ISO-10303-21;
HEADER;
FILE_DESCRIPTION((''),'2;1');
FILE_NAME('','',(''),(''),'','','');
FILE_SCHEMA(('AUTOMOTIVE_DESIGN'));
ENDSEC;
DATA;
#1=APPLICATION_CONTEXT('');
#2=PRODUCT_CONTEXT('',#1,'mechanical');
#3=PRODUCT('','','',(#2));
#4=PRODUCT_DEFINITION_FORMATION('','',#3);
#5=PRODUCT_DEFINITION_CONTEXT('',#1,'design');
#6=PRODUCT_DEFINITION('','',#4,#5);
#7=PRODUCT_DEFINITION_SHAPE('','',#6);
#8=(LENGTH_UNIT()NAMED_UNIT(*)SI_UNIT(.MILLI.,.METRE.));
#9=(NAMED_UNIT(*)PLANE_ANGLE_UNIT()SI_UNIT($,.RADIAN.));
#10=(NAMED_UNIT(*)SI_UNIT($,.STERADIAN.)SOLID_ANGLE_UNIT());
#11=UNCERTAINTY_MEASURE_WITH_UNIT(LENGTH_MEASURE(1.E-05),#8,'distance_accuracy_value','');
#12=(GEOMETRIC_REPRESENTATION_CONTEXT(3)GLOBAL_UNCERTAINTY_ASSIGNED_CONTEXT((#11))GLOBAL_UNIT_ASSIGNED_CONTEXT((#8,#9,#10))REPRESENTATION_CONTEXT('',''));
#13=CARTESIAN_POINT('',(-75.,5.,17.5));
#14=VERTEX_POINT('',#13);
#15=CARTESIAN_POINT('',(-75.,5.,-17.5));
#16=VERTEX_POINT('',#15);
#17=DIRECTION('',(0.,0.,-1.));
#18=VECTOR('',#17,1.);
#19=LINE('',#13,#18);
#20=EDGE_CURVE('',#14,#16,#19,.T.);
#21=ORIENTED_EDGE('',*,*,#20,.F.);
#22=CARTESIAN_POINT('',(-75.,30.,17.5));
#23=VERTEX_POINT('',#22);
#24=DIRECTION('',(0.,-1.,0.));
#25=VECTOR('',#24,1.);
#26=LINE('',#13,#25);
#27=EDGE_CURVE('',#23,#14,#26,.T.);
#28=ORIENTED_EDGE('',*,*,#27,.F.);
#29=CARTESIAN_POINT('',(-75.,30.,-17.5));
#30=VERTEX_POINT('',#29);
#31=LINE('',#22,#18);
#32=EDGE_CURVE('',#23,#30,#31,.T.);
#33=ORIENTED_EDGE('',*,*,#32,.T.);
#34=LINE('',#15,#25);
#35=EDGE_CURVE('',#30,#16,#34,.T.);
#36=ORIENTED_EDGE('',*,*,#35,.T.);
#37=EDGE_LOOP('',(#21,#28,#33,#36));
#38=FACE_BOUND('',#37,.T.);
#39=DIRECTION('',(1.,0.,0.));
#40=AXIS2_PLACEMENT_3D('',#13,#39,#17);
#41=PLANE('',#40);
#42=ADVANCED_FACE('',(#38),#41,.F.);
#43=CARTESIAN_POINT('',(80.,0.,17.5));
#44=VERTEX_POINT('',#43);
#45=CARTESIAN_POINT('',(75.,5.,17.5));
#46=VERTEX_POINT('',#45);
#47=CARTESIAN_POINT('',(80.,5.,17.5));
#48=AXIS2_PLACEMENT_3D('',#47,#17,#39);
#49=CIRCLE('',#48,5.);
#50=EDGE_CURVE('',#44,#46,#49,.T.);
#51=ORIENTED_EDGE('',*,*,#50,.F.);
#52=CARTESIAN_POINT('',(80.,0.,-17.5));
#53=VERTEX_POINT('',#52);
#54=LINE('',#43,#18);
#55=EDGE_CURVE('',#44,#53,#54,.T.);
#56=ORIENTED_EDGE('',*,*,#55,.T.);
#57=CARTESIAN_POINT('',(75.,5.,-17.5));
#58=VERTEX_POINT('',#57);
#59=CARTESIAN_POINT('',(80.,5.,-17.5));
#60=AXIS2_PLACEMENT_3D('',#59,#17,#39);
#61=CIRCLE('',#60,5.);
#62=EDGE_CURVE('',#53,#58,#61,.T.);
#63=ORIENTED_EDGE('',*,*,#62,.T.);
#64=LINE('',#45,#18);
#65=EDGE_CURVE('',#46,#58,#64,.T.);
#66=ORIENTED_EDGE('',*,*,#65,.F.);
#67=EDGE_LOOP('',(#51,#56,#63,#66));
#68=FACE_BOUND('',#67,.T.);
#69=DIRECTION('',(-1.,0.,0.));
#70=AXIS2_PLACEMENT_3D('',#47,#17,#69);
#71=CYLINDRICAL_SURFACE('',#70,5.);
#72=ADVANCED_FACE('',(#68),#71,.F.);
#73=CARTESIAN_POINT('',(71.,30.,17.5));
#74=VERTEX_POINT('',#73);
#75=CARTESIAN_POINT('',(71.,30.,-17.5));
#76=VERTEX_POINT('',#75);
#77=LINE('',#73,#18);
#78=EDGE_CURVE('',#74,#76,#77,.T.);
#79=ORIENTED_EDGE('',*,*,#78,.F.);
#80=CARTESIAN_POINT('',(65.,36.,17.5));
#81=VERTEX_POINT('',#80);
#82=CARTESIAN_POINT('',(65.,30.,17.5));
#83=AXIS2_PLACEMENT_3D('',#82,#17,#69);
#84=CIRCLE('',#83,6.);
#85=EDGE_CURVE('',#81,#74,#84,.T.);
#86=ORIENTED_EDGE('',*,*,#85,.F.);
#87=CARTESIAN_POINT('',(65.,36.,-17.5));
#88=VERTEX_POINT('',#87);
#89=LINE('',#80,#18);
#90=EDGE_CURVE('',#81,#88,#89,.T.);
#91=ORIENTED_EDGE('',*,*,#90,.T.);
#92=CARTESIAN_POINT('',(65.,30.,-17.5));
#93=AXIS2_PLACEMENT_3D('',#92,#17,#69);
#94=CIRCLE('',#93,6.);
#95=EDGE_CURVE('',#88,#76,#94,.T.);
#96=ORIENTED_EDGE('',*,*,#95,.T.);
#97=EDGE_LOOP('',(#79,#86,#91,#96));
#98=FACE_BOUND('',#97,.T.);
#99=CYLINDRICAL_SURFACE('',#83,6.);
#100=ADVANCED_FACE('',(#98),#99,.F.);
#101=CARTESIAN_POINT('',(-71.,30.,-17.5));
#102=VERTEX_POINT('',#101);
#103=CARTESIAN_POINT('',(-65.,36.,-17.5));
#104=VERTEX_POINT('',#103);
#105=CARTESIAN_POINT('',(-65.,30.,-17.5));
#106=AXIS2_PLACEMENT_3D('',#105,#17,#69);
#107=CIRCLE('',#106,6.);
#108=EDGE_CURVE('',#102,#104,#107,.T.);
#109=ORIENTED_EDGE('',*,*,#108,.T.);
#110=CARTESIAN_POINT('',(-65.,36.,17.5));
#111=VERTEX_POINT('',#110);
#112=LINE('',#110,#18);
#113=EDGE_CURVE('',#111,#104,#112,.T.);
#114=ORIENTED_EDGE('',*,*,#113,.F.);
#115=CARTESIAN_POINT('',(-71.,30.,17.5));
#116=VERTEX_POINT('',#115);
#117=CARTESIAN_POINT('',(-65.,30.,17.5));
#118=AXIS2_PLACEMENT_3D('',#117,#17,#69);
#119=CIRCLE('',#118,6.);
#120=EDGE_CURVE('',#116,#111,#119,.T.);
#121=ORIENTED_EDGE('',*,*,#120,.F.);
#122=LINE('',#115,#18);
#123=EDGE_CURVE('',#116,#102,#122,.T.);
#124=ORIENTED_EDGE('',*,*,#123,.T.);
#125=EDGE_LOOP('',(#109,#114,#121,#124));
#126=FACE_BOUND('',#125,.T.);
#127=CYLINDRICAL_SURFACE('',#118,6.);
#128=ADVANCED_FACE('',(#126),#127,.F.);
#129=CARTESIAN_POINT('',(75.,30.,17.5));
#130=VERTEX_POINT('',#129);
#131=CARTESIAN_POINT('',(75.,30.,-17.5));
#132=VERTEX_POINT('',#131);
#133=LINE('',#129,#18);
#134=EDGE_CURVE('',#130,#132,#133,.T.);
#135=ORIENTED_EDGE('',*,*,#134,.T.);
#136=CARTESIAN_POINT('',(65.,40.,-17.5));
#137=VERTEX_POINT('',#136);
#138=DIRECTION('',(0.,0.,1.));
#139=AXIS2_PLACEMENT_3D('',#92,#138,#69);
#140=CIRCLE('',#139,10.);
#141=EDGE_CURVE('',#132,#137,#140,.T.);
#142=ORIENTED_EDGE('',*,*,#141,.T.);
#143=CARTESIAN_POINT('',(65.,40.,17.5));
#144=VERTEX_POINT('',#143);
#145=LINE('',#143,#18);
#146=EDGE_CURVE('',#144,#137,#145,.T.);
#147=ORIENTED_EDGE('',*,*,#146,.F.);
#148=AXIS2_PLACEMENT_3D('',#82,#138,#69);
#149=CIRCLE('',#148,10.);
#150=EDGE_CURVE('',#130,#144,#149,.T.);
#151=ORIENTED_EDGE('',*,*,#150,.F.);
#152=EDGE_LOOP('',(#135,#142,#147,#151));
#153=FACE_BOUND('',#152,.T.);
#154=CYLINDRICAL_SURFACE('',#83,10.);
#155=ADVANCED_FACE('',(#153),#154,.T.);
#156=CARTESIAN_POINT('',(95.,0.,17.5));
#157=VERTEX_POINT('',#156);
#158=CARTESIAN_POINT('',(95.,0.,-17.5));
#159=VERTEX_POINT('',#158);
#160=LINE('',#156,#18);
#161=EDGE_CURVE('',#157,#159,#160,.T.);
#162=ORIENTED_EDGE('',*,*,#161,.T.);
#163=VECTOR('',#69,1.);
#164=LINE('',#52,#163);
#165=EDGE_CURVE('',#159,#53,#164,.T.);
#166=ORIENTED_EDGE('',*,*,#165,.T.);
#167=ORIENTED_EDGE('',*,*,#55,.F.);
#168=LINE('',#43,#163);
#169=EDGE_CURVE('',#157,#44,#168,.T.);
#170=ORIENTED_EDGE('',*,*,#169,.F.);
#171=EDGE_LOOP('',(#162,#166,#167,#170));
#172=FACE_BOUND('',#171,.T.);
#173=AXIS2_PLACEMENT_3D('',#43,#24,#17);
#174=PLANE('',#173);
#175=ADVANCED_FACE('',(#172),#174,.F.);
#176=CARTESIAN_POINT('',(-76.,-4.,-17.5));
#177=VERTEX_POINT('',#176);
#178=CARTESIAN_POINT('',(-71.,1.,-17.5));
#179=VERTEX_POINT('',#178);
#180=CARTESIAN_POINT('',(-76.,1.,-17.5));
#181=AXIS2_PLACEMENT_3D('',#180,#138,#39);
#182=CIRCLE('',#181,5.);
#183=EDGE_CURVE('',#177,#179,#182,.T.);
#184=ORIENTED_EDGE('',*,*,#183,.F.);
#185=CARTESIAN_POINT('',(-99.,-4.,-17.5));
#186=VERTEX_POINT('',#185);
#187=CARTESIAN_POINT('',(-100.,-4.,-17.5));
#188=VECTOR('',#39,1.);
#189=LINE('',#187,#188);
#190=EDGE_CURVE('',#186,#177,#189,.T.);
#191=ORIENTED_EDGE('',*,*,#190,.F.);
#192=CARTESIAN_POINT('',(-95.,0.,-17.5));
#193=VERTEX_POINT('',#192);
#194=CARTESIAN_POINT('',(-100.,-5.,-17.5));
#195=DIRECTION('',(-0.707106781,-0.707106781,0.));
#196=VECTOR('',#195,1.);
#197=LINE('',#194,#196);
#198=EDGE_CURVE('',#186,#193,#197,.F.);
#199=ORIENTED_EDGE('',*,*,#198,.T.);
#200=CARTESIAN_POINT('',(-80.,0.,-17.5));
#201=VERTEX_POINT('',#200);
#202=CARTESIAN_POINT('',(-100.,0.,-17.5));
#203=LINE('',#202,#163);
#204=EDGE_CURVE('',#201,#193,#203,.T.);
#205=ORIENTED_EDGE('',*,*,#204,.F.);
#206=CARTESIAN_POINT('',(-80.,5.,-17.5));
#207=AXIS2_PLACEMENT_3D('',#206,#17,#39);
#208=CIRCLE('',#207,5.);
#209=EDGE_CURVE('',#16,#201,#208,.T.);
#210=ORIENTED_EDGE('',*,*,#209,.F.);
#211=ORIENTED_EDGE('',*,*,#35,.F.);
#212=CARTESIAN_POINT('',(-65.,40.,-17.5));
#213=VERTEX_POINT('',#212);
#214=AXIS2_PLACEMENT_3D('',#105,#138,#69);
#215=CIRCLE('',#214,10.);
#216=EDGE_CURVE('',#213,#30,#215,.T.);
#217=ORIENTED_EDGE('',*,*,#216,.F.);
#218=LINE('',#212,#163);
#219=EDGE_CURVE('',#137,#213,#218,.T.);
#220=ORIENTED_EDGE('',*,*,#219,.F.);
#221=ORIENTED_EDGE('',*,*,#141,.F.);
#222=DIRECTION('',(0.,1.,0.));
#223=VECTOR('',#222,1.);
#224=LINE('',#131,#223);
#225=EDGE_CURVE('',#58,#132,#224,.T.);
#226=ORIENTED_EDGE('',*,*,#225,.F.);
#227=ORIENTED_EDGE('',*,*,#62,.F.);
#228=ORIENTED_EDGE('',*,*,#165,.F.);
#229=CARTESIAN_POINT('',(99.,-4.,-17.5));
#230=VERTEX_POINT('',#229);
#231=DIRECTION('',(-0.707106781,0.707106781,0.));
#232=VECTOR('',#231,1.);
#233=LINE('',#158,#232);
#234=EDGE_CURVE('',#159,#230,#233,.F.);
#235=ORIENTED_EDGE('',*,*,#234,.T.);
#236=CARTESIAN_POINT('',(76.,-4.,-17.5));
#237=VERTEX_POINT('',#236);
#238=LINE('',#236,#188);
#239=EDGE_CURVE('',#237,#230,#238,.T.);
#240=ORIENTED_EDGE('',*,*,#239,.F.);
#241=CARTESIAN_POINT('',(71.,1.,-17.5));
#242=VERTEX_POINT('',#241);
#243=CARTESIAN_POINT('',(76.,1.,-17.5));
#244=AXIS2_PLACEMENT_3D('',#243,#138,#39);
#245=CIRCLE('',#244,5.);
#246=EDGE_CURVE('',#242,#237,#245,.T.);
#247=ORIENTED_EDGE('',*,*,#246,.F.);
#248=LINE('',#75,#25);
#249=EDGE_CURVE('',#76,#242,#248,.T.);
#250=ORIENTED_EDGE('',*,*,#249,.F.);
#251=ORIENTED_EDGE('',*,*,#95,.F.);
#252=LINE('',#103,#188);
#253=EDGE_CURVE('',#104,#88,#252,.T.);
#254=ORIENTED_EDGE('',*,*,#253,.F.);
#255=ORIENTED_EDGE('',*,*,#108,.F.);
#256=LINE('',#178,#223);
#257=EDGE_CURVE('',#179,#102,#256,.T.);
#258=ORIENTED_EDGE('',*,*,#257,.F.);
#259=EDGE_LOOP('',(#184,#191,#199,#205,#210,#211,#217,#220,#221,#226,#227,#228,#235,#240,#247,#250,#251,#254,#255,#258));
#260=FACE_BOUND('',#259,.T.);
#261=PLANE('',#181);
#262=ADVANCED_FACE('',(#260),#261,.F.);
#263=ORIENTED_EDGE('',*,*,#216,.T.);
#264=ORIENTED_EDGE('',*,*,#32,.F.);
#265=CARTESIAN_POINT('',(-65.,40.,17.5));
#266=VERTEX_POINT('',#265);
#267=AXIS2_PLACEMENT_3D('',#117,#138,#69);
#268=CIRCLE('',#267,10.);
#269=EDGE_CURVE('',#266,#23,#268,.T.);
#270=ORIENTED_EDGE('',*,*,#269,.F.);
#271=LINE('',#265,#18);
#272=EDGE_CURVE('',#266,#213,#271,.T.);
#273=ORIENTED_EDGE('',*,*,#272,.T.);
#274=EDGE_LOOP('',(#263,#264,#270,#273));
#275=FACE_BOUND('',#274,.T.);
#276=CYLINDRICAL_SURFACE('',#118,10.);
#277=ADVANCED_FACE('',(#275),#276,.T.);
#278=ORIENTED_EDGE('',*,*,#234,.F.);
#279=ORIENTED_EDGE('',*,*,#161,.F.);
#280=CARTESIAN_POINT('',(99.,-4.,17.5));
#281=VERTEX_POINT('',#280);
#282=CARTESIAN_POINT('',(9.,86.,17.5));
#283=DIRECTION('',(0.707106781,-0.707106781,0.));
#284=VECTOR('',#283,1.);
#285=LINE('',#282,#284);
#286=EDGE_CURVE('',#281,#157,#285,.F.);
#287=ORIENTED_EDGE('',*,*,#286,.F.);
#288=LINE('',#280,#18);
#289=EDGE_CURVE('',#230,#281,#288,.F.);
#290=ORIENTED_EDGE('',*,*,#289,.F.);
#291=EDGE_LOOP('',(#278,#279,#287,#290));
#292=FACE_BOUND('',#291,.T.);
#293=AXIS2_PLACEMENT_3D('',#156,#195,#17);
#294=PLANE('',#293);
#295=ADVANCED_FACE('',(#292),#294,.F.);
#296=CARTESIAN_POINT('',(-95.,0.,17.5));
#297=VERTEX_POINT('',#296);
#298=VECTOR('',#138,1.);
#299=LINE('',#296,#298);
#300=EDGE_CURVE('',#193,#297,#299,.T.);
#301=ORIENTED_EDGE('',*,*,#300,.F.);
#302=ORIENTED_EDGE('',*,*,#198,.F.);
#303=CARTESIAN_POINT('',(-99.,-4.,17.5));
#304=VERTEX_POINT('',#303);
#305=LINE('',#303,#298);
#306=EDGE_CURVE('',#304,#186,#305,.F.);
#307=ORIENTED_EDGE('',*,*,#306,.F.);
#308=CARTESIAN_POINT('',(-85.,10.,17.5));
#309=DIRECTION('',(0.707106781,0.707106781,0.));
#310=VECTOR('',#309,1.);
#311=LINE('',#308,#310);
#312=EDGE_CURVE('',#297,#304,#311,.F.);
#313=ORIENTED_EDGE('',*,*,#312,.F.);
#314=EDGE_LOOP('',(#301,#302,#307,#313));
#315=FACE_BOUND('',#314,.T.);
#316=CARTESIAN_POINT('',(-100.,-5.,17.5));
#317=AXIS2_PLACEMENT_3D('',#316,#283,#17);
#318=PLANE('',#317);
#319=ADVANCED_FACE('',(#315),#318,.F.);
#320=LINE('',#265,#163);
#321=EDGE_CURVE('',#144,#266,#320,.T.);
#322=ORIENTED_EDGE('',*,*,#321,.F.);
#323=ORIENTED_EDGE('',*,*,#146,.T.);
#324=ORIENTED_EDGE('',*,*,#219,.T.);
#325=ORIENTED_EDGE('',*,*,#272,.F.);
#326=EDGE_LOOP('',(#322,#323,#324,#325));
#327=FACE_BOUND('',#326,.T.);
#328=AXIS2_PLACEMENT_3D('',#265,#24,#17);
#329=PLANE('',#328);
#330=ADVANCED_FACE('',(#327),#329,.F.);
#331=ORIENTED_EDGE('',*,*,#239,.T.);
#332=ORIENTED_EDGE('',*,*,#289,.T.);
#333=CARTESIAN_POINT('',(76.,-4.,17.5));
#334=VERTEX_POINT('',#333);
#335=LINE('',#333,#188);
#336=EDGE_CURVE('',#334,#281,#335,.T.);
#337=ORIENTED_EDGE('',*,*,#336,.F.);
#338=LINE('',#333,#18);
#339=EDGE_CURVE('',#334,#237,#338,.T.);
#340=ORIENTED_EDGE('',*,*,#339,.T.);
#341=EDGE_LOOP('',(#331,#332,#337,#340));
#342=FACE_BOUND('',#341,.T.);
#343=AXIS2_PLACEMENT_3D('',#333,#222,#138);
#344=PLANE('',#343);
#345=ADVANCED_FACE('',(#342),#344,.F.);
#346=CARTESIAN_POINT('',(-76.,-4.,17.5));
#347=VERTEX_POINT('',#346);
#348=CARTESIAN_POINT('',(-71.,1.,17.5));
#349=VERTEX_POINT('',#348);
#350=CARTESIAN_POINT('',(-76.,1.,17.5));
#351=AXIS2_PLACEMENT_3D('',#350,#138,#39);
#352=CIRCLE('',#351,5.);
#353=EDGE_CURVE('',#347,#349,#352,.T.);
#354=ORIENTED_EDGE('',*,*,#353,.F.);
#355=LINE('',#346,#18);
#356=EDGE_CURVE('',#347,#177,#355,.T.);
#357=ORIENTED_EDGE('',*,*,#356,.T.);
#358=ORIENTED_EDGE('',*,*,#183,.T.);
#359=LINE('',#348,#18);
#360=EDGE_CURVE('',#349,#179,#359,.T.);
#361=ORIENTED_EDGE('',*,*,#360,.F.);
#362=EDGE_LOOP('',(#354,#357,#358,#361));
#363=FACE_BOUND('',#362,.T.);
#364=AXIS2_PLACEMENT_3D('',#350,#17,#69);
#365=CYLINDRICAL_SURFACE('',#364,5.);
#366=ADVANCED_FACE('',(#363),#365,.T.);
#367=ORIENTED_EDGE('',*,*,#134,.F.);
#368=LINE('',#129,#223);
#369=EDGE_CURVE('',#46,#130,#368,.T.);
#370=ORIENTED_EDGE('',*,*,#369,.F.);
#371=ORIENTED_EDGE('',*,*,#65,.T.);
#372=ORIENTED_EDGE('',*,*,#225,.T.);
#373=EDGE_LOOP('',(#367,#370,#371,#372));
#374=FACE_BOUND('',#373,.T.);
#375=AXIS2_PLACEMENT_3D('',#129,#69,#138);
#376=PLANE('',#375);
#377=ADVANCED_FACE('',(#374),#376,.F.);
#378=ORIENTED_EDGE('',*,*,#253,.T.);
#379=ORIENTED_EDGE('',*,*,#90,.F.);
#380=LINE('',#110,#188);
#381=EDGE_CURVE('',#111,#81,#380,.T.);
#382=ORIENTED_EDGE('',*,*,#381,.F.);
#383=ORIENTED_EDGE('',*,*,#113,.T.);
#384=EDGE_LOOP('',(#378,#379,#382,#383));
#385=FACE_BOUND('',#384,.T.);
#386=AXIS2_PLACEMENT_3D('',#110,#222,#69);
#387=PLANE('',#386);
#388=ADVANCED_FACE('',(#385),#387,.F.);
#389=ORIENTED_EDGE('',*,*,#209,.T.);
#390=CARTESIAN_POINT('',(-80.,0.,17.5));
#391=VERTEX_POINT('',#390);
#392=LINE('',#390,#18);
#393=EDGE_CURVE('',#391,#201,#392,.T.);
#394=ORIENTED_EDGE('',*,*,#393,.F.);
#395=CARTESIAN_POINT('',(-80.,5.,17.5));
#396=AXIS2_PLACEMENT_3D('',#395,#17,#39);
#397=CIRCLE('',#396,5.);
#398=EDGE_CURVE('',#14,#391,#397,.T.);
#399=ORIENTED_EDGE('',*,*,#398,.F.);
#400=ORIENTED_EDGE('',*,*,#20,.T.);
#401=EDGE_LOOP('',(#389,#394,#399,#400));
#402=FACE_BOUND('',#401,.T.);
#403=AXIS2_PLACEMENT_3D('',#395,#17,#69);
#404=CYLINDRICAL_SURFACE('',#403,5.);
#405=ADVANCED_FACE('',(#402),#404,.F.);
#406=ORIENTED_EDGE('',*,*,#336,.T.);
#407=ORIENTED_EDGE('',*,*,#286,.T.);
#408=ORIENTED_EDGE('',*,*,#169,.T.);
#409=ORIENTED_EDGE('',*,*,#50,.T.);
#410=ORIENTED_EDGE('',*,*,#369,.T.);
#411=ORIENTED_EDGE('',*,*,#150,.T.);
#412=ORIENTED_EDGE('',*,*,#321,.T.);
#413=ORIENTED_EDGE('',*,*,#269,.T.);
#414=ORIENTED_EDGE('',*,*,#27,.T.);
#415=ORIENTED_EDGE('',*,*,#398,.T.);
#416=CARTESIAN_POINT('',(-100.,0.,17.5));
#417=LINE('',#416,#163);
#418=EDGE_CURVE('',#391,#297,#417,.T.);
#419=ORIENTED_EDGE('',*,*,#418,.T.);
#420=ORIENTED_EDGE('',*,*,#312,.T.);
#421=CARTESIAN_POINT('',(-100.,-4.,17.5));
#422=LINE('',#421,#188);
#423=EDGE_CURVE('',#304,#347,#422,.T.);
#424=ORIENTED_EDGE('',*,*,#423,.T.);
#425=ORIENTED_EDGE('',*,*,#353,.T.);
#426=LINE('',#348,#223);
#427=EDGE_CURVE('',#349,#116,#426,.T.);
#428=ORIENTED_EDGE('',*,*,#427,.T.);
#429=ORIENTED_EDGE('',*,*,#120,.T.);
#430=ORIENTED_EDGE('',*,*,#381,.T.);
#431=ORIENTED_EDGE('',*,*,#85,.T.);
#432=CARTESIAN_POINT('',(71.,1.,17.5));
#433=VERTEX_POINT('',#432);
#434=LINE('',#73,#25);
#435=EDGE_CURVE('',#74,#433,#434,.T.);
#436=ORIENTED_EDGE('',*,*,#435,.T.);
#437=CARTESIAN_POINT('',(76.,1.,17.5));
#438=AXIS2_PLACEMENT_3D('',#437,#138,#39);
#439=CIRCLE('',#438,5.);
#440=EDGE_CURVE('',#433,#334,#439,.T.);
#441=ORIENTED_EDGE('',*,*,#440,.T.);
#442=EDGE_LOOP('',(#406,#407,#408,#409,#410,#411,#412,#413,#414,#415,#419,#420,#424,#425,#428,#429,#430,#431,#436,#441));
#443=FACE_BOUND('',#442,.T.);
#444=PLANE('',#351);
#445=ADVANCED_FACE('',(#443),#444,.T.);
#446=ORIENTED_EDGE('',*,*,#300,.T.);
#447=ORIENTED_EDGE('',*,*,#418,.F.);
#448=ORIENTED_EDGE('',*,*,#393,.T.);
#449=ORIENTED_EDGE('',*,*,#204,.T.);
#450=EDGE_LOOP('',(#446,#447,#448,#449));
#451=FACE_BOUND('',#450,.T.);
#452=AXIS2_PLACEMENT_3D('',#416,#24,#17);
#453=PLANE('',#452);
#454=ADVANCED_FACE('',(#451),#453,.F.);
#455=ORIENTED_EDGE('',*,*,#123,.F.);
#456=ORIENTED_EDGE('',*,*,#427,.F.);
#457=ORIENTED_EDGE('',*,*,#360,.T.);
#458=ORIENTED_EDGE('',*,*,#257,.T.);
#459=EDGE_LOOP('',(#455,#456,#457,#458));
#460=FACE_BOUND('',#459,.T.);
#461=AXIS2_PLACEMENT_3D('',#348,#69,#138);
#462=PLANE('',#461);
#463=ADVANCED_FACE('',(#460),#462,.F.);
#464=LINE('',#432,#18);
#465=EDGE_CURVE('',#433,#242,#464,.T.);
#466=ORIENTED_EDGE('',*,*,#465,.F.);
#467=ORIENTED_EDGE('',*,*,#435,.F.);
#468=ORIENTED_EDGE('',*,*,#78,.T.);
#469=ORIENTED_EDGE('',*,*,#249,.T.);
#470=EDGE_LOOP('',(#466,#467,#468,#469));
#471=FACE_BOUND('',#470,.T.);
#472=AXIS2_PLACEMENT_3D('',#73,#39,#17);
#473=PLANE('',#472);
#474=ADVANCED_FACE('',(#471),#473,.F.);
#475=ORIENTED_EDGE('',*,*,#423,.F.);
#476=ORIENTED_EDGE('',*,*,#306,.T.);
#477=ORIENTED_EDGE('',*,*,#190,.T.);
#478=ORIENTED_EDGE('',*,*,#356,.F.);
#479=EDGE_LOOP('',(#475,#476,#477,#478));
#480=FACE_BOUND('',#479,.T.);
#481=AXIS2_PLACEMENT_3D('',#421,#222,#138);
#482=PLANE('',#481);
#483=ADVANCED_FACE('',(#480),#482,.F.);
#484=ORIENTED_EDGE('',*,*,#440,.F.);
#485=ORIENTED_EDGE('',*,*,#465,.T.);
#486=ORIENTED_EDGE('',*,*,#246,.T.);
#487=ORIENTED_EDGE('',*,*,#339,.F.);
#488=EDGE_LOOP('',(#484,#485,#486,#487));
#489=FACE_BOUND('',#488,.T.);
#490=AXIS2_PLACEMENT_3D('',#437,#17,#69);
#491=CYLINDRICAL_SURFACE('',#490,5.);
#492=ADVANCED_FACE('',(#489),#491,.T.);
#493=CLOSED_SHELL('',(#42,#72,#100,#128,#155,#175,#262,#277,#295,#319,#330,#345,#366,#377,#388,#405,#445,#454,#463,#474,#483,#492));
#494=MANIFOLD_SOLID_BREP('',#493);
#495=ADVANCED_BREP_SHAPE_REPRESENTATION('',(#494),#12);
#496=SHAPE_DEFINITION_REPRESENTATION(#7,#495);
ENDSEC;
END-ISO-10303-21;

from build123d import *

# Parameters (mm, degrees)
BOSS_EXTRUDE1_DEPTH = 17.5
CHAMFER1_SIZE       = 5


with BuildPart() as part:
    # Sketch1 → Boss-Extrude1 (new, symmetric)
    with BuildSketch(Plane.XY):
        with BuildLine():
            Line((-100, 0), (-80, 0))
            ThreePointArc((-80, 0), (-76.464466094, 1.464466094), (-75, 5))
            Line((-75, 5), (-75, 30))
            ThreePointArc((-75, 30), (-72.071067812, 37.071067812), (-65, 40))
            Line((-65, 40), (65, 40))
            ThreePointArc((65, 40), (72.071067812, 37.071067812), (75, 30))
            Line((75, 30), (75, 5))
            ThreePointArc((75, 5), (76.464466094, 1.464466094), (80, 0))
            Line((80, 0), (100, 0))
            Line((100, 0), (100, -4))
            Line((100, -4), (76, -4))
            ThreePointArc((76, -4), (72.464466094, -2.535533906), (71, 1))
            Line((71, 1), (71, 30))
            ThreePointArc((71, 30), (69.242640687, 34.242640687), (65, 36))
            Line((65, 36), (-65, 36))
            ThreePointArc((-65, 36), (-69.242640687, 34.242640687), (-71, 30))
            Line((-71, 30), (-71, 1))
            ThreePointArc((-71, 1), (-72.464466094, -2.535533906), (-76, -4))
            Line((-76, -4), (-100, -4))
            Line((-100, -4), (-100, 0))
        make_face()
    extrude(amount=BOSS_EXTRUDE1_DEPTH, both=True)

    # Chamfer1
    # the kernel refuses this chamfer: 5 mm, written as the material it takes off along each edge
    with BuildSketch(Plane(origin=(-100, 0, 30.35841494), x_dir=(0.9996219169112968, 0.027495876610586334, 0), z_dir=(0, 0, -1)), Plane(origin=(100, 0, 30.35841494), x_dir=(0.0274958766105877, -0.9996219169112968, 0), z_dir=(0, 0, -1))) as chamfer1_piece_1:
        Polygon((CHAMFER1_SIZE * 0.999621916911, CHAMFER1_SIZE * 0.0274958766106), (-CHAMFER1_SIZE * 0.0274958766106, CHAMFER1_SIZE * 0.999621916911), (0, 0), align=None)
    extrude(amount=60.71682988, mode=Mode.SUBTRACT)


solid = part.part
